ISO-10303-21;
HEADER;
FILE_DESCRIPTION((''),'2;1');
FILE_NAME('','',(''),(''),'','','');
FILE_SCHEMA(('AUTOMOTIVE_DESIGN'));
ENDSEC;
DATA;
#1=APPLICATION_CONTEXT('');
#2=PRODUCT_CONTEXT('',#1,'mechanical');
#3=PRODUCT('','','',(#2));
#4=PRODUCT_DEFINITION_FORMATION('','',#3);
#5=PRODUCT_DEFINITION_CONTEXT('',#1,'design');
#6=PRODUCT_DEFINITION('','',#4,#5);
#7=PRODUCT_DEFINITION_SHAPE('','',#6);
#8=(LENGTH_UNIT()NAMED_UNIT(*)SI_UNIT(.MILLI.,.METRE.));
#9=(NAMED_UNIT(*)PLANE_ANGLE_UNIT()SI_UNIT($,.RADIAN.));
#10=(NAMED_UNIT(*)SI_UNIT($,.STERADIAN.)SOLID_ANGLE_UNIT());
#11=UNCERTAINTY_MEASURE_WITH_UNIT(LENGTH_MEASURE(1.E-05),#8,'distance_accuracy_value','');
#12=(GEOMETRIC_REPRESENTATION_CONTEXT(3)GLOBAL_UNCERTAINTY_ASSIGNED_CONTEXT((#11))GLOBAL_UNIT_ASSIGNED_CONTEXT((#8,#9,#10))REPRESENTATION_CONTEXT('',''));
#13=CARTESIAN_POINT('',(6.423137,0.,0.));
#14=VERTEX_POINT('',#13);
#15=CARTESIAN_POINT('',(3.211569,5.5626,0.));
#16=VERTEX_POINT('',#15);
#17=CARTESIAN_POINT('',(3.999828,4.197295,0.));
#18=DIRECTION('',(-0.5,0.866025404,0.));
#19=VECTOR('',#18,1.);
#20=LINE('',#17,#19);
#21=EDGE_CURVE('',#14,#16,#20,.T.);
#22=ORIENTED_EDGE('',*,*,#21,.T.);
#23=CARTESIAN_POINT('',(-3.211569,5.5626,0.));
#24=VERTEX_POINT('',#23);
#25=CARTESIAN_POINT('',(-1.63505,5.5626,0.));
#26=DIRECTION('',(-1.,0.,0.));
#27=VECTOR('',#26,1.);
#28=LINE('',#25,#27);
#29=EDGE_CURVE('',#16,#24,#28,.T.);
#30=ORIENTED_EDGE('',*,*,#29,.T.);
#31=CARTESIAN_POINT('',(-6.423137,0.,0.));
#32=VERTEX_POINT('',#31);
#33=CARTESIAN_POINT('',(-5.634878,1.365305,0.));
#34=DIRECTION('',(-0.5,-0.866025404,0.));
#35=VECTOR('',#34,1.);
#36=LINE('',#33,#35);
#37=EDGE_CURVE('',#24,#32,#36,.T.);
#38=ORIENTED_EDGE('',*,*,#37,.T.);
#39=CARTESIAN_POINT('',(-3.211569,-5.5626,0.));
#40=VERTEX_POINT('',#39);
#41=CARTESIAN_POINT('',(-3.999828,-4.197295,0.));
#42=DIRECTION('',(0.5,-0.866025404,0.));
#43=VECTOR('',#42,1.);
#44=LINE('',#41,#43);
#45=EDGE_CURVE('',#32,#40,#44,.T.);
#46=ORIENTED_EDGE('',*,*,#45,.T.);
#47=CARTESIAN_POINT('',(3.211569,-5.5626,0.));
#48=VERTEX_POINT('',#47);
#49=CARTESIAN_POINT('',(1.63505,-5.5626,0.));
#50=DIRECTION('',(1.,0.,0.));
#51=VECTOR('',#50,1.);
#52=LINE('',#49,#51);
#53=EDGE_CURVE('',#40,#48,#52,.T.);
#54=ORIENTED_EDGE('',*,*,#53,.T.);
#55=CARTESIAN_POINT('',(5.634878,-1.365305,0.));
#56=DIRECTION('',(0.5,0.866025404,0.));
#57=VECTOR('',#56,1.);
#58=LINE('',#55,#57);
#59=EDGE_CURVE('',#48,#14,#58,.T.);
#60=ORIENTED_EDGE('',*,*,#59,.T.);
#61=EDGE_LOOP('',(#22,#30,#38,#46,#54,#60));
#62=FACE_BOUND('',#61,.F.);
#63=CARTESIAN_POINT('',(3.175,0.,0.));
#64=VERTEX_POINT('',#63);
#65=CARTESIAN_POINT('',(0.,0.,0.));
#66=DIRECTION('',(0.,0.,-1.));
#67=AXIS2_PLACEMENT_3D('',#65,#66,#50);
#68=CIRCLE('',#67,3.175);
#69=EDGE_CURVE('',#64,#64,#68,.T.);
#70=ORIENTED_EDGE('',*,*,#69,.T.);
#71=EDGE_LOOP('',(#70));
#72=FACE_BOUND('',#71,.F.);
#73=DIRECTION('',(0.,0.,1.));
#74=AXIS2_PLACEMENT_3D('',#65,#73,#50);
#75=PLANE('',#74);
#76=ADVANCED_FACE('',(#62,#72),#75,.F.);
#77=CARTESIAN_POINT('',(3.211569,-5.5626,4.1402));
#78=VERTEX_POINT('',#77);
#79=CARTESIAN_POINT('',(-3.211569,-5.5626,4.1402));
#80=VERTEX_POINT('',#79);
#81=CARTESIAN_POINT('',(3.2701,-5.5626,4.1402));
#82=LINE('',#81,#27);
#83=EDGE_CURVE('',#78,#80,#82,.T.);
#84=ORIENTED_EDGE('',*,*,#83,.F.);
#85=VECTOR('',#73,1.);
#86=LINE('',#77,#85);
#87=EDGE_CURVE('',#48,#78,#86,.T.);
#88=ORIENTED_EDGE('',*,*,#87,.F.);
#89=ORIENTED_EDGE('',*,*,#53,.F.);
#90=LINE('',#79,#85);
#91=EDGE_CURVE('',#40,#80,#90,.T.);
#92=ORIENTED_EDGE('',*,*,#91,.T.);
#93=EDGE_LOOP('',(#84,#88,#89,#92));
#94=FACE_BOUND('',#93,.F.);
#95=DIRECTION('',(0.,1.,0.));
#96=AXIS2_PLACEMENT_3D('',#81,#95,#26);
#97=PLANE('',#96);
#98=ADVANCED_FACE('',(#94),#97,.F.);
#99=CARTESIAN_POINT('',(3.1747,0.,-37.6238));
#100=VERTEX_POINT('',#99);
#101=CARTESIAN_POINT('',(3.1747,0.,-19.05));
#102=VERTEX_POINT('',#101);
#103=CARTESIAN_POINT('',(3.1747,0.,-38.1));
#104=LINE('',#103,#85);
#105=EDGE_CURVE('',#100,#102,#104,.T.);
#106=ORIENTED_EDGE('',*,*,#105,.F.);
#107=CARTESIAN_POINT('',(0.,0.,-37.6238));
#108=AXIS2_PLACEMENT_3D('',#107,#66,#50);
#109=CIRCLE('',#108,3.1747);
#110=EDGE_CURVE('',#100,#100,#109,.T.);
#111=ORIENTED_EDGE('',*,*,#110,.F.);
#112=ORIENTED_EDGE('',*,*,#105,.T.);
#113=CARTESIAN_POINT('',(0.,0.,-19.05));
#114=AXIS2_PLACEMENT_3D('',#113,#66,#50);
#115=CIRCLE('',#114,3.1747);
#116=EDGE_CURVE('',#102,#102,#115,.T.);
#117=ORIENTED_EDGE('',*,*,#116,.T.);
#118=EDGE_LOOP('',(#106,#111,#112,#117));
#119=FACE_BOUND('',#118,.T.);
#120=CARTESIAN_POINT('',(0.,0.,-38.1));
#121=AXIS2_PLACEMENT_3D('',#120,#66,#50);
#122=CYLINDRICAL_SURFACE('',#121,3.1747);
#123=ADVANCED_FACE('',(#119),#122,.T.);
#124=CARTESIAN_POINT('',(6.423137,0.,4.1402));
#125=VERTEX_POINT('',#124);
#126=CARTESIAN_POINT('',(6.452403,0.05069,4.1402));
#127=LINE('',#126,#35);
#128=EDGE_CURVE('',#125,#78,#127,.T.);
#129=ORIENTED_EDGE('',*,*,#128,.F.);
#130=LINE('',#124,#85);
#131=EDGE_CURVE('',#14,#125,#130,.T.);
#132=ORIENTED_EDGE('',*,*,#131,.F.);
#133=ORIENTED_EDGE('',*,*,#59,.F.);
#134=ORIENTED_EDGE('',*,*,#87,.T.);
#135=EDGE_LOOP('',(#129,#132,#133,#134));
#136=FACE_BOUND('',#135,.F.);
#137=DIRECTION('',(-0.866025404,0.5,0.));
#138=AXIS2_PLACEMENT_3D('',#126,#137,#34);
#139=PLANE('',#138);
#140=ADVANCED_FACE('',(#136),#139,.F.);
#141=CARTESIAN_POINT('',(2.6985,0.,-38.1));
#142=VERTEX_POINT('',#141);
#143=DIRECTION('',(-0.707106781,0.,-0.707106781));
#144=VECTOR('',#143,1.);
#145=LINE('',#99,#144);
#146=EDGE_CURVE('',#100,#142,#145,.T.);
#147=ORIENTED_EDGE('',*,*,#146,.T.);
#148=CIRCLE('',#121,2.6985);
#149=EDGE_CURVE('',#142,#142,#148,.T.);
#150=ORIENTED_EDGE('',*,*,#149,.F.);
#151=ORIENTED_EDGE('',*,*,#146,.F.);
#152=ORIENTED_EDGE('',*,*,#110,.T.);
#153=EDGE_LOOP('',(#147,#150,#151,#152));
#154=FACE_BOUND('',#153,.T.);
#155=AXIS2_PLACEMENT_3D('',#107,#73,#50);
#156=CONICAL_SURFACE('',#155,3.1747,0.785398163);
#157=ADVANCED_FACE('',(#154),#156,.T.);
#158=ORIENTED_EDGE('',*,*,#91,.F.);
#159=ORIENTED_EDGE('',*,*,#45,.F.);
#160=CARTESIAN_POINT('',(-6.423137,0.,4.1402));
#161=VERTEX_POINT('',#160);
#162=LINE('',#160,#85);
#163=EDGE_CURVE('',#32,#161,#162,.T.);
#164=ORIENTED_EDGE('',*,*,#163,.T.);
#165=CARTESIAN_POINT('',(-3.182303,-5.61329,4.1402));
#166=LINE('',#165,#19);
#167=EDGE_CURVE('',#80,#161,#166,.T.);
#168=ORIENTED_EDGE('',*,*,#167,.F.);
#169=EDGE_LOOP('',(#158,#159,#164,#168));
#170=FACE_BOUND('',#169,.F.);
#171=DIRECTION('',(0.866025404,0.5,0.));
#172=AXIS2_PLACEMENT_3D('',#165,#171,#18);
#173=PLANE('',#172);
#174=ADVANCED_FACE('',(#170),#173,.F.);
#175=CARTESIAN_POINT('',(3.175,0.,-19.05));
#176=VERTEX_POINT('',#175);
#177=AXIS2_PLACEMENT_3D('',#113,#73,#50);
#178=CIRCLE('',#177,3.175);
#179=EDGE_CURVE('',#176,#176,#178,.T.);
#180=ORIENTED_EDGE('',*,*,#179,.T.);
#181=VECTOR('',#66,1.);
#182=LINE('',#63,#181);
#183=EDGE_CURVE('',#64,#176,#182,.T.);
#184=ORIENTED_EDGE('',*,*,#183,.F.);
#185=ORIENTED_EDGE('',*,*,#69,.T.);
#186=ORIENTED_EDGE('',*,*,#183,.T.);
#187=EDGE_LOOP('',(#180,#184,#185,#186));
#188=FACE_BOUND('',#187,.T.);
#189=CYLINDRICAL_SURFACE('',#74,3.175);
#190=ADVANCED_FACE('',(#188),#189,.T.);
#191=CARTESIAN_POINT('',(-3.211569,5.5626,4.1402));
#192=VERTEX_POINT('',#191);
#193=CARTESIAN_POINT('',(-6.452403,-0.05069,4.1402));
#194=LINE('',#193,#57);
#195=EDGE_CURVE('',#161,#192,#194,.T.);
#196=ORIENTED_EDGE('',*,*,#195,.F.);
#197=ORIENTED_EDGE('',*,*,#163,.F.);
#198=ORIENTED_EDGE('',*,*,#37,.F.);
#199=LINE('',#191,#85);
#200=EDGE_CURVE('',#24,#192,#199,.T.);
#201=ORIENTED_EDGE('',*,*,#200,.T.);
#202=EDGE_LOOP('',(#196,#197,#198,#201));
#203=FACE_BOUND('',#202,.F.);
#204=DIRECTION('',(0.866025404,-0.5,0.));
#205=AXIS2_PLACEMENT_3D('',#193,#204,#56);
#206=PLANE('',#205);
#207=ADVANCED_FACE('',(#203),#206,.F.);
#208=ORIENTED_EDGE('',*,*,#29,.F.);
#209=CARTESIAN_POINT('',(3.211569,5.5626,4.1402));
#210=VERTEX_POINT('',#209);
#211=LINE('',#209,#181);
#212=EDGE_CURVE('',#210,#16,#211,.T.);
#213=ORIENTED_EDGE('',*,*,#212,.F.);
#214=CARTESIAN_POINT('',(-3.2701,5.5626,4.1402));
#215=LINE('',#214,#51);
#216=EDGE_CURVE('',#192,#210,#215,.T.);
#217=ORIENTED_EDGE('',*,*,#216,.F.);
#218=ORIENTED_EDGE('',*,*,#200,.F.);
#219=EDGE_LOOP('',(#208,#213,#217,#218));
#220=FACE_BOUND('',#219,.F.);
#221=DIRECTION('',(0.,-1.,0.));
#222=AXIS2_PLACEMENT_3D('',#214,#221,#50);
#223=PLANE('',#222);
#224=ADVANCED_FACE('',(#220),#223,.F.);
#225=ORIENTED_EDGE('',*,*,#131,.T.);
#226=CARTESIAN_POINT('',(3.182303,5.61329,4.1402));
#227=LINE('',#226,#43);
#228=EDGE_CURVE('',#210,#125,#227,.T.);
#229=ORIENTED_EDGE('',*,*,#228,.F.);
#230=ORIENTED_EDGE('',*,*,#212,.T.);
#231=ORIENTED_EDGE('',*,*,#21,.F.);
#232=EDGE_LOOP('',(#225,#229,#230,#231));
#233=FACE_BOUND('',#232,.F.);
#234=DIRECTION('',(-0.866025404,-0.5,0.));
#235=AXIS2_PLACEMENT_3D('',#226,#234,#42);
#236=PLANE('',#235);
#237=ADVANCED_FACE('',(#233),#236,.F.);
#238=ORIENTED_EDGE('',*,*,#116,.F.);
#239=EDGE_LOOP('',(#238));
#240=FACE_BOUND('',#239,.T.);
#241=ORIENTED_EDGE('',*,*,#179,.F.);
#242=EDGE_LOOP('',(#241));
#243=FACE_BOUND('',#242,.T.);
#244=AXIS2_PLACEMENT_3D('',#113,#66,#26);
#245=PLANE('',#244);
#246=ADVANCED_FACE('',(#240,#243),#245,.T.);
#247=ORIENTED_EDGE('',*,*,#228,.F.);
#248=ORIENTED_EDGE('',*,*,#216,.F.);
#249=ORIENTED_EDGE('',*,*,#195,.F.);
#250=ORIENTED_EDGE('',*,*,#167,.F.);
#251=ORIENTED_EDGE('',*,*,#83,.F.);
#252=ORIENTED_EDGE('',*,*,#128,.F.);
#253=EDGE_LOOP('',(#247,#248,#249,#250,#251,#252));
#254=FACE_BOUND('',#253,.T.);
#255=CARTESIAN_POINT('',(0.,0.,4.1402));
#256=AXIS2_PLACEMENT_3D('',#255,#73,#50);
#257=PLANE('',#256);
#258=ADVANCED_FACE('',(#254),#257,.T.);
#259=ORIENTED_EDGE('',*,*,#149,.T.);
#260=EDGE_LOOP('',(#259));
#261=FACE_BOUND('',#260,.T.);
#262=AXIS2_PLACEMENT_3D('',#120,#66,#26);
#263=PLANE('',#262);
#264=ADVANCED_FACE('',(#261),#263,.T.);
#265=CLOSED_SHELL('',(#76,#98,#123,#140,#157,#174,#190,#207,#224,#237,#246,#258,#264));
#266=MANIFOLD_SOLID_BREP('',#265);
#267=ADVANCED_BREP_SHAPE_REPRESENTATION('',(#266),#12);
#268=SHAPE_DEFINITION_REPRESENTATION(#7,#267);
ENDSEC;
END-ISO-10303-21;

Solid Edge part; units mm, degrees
sketch "Sketch1" plane through (0, 0, 0) normal (0, 0, 1) x (1, 0, 0)
  circle A0 centre (0, 0) radius 6.4526
  dimension "D1" = 12.9052
extrude "Protrusion1" add sketch "Sketch1" along normal blind 4.1402
sketch "Sketch2" plane through (0, 0, 0) normal (0, 0, -1) x (1, 0, 0)
  circle A0 centre (0, 0) radius 3.175
extrude "Protrusion2" add sketch "Sketch2" along normal blind 38.1
sketch "Sketch3" plane through (0, 0, -38.1) normal (0, 0, -1) x (1, 0, 0)
  circle A0 centre (0, 0) radius 3.1747
extrude "Cutout1" cut sketch "Sketch3" against normal blind 19.05 flip side to cut
chamfer "Chamfer_1" distance 0.4762 angle 45 1 edges at (-3.1747, 0, -38.1)
sketch "Sketch4" plane through (0, 0, 4.1402) normal (0, 0, 1) x (1, 0, 0)
  line L0 (-3.2701, 5.5626) -> (3.2701, 5.5626)
  dimension "D1" = 11.1252
extrude "Cutout2" cut sketch "Sketch4" against normal up to next material side at (0, 5.6126, 4.1402)
pattern_circular "Pattern1" count 6 over 360 about axis through (0, 0, 4.1402) along (0, 0, 1) of "Cutout2"
properties part number "117623"
